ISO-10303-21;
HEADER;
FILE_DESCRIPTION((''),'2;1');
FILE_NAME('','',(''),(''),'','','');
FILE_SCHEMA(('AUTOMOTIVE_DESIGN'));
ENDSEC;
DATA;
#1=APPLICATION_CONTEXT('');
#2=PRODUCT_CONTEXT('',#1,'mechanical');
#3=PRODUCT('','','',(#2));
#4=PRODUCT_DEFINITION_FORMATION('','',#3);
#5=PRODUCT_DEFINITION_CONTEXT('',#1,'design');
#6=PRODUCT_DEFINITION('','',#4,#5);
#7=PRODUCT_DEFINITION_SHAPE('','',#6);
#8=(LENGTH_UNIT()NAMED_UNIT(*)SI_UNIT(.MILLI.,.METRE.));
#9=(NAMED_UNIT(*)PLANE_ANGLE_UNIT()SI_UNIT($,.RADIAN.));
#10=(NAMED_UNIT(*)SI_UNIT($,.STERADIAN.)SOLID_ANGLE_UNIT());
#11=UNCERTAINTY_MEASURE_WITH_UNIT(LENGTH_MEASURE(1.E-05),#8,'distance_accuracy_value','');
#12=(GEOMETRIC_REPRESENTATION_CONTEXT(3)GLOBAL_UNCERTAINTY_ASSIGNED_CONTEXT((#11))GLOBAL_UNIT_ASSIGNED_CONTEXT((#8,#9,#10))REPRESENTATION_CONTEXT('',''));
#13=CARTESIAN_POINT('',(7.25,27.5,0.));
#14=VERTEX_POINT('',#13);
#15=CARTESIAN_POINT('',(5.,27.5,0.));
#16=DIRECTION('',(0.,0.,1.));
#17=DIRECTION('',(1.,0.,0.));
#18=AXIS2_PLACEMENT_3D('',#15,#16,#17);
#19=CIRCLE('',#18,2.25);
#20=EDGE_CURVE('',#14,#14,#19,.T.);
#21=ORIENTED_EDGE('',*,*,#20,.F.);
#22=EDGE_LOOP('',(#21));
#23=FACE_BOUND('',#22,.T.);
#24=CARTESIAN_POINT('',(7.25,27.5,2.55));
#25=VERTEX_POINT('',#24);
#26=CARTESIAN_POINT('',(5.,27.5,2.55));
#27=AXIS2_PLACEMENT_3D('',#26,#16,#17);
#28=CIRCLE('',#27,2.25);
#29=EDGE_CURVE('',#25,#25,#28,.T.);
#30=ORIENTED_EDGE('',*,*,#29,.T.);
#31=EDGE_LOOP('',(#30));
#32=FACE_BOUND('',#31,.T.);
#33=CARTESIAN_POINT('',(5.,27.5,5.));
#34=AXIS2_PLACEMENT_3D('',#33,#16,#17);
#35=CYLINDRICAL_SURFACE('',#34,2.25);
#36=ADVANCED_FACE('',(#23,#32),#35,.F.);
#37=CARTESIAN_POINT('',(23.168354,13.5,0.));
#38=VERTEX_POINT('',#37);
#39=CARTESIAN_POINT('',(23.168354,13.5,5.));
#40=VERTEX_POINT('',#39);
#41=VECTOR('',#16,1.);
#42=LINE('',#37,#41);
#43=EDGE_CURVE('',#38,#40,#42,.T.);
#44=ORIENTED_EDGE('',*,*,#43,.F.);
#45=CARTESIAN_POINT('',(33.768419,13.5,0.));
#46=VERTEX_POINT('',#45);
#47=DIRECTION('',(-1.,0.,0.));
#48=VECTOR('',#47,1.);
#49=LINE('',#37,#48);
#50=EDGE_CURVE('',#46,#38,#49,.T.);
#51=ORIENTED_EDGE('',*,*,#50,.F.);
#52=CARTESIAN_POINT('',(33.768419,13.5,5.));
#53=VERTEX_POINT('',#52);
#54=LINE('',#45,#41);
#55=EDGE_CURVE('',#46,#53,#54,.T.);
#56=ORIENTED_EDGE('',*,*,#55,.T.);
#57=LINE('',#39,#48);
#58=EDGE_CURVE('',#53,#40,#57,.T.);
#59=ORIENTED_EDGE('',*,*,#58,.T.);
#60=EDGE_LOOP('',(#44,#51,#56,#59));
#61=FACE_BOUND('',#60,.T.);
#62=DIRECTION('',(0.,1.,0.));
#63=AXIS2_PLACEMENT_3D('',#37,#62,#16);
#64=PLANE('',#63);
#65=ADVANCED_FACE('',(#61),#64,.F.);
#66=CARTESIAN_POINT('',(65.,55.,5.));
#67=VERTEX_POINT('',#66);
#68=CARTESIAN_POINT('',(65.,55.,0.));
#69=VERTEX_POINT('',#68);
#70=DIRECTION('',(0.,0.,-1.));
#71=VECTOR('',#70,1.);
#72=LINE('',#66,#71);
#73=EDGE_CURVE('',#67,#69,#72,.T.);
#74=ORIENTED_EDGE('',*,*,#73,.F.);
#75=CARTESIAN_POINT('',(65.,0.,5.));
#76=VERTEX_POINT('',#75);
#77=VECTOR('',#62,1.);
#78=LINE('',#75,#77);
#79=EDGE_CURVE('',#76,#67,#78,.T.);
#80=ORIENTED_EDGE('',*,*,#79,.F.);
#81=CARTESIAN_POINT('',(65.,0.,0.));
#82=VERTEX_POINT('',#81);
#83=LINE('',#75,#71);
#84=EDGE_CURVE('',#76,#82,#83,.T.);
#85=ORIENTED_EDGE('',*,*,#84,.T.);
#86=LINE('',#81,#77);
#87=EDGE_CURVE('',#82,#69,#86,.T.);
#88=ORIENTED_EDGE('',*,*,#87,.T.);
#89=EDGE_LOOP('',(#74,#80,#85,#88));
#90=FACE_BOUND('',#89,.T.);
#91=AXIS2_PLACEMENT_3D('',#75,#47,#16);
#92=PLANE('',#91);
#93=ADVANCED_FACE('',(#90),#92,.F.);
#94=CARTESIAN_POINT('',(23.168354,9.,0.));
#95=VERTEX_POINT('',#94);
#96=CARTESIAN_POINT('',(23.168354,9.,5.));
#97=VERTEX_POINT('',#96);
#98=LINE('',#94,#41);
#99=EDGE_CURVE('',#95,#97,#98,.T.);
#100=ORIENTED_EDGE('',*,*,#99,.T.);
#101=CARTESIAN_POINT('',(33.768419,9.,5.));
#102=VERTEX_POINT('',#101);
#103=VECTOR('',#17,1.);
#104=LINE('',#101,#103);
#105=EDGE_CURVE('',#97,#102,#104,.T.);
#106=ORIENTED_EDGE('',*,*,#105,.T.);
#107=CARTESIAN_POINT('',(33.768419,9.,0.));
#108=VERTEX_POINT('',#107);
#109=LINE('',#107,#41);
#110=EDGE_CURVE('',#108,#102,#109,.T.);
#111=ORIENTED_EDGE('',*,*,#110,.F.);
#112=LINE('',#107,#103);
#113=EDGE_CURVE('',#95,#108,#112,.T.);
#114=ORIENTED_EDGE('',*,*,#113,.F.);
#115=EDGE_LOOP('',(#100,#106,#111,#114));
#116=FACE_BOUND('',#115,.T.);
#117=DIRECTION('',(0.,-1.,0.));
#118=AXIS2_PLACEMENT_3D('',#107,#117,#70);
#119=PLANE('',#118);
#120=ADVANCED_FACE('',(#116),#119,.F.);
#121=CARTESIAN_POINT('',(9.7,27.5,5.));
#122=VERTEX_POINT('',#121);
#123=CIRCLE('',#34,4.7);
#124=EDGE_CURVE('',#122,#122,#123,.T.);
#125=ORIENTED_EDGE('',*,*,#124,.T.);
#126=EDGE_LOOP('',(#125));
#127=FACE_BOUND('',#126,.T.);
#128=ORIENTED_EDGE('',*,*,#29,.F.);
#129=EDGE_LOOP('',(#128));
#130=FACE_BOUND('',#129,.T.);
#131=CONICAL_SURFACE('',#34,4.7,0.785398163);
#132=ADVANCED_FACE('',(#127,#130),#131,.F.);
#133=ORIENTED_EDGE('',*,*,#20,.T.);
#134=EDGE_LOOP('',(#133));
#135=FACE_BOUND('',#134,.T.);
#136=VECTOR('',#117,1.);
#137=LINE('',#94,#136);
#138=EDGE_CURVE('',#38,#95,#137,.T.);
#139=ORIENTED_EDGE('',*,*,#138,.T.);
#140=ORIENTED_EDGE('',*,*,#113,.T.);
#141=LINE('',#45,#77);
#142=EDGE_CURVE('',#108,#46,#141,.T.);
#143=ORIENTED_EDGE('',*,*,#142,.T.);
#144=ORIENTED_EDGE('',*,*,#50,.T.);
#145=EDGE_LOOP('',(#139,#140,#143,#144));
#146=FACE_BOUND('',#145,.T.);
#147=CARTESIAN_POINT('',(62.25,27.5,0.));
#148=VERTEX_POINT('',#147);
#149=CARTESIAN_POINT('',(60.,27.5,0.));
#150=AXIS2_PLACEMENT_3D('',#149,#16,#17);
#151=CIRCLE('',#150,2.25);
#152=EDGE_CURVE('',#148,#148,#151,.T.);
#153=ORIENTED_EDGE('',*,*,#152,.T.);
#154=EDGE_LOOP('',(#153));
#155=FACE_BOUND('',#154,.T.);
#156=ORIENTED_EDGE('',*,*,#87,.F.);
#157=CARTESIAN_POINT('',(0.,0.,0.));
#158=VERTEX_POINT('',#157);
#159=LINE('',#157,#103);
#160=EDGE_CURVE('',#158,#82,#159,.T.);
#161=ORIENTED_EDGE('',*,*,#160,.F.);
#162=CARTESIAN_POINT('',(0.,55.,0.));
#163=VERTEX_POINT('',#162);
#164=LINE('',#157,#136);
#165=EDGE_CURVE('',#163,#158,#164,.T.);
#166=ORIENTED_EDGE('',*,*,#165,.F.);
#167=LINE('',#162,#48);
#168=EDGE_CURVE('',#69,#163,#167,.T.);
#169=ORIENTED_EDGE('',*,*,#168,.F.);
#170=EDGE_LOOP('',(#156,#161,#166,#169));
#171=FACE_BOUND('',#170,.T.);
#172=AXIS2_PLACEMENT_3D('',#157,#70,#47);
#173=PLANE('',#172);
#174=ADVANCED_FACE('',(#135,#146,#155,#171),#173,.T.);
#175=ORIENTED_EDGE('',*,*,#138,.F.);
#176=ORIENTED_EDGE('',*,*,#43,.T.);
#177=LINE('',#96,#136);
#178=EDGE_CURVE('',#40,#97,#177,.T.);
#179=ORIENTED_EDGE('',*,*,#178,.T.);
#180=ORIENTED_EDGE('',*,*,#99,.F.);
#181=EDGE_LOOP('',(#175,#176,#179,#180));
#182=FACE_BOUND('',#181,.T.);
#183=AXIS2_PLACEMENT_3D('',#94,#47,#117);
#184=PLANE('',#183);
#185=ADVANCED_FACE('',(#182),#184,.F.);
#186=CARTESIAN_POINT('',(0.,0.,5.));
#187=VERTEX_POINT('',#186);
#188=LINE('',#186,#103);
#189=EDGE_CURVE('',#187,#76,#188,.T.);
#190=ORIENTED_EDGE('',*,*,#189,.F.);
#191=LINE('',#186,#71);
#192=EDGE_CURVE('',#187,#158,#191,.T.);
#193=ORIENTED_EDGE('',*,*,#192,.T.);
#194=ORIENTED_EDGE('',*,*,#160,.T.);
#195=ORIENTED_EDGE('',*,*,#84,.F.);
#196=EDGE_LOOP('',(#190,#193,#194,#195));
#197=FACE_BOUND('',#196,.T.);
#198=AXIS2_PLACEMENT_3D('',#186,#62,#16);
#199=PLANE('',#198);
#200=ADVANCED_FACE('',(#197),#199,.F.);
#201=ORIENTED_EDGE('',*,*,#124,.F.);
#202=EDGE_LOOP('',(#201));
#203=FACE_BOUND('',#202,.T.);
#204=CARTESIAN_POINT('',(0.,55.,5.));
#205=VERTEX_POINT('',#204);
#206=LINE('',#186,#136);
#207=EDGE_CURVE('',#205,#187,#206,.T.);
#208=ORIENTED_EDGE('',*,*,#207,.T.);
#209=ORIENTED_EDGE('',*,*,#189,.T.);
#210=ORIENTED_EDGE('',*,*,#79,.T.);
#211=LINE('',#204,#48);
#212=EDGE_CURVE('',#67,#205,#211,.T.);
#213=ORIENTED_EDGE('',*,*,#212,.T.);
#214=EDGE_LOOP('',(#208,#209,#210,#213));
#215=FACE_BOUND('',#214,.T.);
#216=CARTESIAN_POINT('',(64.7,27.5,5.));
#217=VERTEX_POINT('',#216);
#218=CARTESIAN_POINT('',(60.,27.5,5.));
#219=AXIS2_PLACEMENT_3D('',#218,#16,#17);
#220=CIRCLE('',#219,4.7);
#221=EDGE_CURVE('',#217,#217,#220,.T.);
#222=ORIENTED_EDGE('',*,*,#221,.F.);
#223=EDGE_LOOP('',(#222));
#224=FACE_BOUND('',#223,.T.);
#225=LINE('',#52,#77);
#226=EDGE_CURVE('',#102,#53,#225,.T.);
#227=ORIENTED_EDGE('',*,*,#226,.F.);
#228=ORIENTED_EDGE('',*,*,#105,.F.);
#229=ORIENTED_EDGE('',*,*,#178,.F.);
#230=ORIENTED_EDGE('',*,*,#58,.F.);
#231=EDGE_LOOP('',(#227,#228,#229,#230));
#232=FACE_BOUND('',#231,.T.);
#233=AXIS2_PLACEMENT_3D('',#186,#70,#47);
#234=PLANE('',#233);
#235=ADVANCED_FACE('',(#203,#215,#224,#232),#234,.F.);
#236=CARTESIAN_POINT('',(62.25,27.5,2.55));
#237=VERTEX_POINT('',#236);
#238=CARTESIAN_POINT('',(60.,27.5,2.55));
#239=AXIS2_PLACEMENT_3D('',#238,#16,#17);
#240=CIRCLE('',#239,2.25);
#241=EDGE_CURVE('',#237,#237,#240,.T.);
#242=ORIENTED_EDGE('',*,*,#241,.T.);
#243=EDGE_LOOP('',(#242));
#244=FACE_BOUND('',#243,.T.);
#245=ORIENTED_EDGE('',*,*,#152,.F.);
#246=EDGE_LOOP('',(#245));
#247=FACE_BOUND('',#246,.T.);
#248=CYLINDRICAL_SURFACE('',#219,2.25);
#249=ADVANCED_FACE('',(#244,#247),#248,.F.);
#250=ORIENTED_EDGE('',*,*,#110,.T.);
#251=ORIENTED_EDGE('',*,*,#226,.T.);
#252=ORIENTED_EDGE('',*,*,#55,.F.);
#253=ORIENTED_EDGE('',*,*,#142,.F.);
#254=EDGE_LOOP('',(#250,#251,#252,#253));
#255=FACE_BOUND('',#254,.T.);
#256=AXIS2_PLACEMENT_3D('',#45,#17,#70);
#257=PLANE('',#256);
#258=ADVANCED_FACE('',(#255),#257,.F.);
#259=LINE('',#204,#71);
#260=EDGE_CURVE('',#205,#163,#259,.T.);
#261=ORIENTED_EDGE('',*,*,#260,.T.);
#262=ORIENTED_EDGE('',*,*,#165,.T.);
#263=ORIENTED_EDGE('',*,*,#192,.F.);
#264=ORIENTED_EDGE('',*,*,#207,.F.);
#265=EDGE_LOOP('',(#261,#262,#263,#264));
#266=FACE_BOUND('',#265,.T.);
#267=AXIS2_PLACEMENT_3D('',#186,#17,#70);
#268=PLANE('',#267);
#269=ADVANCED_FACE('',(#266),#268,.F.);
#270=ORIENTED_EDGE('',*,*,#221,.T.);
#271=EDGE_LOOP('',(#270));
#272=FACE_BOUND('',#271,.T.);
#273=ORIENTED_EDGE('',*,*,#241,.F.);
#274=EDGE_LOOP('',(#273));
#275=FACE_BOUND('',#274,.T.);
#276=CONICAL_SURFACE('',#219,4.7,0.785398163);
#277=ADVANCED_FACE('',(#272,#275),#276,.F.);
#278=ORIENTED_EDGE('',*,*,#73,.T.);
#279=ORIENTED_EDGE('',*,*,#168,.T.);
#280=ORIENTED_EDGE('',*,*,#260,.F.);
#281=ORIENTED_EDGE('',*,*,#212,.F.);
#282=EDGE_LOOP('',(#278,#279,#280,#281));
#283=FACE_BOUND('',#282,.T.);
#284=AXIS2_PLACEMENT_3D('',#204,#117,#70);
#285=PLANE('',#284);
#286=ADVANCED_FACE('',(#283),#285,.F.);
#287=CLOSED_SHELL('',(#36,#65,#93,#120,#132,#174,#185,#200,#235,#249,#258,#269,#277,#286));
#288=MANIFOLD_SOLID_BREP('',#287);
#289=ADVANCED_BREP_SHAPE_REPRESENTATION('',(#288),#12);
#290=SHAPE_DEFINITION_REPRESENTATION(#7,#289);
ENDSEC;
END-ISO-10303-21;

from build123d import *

# Parameters (mm, degrees)
ESQUISSE1_W                                    = 65
ESQUISSE1_H                                    = 55
BOSS_EXTRU_1_DEPTH                             = 5
ESQUISSE2_R                                    = 2
ENL_V_MAT_EXTRU_1_DEPTH                        = 86.293610546
FRAISAGE_POUR_VIS_T_TE_FRAIS_E_M41_D           = 4.5
FRAISAGE_POUR_VIS_T_TE_FRAIS_E_M41_CSINK_D     = 9.4
FRAISAGE_POUR_VIS_T_TE_FRAIS_E_M41_CSINK_ANGLE = 90
ESQUISSE6_W                                    = 10.600064569
ESQUISSE6_H                                    = 4.5
ENL_V_MAT_EXTRU_2_DEPTH                        = 86.293610546


with BuildPart() as part:
    # Esquisse1 → Boss.-Extru.1 (new body)
    with BuildSketch(Plane.XY):
        with Locations((32.5, 27.5)):
            Rectangle(ESQUISSE1_W, ESQUISSE1_H)
    extrude(amount=BOSS_EXTRU_1_DEPTH)

    # Esquisse2 → Enlèv. mat.-Extru.1 (cut, through all)
    with BuildSketch(Plane.XY.offset(5)):
        with Locations((5, 27.5)):
            Circle(ESQUISSE2_R)
        with Locations((60, 27.5)):
            Circle(ESQUISSE2_R)
    extrude(amount=-ENL_V_MAT_EXTRU_1_DEPTH, mode=Mode.SUBTRACT)

    # Fraisage pour vis à tête fraisée M41 (through all)
    with Locations(Plane.XY.offset(5)):
        with Locations((5, 27.5), (60, 27.5)):
            CounterSinkHole(FRAISAGE_POUR_VIS_T_TE_FRAIS_E_M41_D / 2, FRAISAGE_POUR_VIS_T_TE_FRAIS_E_M41_CSINK_D / 2, counter_sink_angle=FRAISAGE_POUR_VIS_T_TE_FRAIS_E_M41_CSINK_ANGLE)

    # Esquisse6 → Enlèv. mat.-Extru.2 (cut, through all)
    with BuildSketch(Plane.XY.offset(5)):
        with Locations((28.468386436, 11.25)):
            Rectangle(ESQUISSE6_W, ESQUISSE6_H)
    extrude(amount=-ENL_V_MAT_EXTRU_2_DEPTH, mode=Mode.SUBTRACT)


solid = part.part
